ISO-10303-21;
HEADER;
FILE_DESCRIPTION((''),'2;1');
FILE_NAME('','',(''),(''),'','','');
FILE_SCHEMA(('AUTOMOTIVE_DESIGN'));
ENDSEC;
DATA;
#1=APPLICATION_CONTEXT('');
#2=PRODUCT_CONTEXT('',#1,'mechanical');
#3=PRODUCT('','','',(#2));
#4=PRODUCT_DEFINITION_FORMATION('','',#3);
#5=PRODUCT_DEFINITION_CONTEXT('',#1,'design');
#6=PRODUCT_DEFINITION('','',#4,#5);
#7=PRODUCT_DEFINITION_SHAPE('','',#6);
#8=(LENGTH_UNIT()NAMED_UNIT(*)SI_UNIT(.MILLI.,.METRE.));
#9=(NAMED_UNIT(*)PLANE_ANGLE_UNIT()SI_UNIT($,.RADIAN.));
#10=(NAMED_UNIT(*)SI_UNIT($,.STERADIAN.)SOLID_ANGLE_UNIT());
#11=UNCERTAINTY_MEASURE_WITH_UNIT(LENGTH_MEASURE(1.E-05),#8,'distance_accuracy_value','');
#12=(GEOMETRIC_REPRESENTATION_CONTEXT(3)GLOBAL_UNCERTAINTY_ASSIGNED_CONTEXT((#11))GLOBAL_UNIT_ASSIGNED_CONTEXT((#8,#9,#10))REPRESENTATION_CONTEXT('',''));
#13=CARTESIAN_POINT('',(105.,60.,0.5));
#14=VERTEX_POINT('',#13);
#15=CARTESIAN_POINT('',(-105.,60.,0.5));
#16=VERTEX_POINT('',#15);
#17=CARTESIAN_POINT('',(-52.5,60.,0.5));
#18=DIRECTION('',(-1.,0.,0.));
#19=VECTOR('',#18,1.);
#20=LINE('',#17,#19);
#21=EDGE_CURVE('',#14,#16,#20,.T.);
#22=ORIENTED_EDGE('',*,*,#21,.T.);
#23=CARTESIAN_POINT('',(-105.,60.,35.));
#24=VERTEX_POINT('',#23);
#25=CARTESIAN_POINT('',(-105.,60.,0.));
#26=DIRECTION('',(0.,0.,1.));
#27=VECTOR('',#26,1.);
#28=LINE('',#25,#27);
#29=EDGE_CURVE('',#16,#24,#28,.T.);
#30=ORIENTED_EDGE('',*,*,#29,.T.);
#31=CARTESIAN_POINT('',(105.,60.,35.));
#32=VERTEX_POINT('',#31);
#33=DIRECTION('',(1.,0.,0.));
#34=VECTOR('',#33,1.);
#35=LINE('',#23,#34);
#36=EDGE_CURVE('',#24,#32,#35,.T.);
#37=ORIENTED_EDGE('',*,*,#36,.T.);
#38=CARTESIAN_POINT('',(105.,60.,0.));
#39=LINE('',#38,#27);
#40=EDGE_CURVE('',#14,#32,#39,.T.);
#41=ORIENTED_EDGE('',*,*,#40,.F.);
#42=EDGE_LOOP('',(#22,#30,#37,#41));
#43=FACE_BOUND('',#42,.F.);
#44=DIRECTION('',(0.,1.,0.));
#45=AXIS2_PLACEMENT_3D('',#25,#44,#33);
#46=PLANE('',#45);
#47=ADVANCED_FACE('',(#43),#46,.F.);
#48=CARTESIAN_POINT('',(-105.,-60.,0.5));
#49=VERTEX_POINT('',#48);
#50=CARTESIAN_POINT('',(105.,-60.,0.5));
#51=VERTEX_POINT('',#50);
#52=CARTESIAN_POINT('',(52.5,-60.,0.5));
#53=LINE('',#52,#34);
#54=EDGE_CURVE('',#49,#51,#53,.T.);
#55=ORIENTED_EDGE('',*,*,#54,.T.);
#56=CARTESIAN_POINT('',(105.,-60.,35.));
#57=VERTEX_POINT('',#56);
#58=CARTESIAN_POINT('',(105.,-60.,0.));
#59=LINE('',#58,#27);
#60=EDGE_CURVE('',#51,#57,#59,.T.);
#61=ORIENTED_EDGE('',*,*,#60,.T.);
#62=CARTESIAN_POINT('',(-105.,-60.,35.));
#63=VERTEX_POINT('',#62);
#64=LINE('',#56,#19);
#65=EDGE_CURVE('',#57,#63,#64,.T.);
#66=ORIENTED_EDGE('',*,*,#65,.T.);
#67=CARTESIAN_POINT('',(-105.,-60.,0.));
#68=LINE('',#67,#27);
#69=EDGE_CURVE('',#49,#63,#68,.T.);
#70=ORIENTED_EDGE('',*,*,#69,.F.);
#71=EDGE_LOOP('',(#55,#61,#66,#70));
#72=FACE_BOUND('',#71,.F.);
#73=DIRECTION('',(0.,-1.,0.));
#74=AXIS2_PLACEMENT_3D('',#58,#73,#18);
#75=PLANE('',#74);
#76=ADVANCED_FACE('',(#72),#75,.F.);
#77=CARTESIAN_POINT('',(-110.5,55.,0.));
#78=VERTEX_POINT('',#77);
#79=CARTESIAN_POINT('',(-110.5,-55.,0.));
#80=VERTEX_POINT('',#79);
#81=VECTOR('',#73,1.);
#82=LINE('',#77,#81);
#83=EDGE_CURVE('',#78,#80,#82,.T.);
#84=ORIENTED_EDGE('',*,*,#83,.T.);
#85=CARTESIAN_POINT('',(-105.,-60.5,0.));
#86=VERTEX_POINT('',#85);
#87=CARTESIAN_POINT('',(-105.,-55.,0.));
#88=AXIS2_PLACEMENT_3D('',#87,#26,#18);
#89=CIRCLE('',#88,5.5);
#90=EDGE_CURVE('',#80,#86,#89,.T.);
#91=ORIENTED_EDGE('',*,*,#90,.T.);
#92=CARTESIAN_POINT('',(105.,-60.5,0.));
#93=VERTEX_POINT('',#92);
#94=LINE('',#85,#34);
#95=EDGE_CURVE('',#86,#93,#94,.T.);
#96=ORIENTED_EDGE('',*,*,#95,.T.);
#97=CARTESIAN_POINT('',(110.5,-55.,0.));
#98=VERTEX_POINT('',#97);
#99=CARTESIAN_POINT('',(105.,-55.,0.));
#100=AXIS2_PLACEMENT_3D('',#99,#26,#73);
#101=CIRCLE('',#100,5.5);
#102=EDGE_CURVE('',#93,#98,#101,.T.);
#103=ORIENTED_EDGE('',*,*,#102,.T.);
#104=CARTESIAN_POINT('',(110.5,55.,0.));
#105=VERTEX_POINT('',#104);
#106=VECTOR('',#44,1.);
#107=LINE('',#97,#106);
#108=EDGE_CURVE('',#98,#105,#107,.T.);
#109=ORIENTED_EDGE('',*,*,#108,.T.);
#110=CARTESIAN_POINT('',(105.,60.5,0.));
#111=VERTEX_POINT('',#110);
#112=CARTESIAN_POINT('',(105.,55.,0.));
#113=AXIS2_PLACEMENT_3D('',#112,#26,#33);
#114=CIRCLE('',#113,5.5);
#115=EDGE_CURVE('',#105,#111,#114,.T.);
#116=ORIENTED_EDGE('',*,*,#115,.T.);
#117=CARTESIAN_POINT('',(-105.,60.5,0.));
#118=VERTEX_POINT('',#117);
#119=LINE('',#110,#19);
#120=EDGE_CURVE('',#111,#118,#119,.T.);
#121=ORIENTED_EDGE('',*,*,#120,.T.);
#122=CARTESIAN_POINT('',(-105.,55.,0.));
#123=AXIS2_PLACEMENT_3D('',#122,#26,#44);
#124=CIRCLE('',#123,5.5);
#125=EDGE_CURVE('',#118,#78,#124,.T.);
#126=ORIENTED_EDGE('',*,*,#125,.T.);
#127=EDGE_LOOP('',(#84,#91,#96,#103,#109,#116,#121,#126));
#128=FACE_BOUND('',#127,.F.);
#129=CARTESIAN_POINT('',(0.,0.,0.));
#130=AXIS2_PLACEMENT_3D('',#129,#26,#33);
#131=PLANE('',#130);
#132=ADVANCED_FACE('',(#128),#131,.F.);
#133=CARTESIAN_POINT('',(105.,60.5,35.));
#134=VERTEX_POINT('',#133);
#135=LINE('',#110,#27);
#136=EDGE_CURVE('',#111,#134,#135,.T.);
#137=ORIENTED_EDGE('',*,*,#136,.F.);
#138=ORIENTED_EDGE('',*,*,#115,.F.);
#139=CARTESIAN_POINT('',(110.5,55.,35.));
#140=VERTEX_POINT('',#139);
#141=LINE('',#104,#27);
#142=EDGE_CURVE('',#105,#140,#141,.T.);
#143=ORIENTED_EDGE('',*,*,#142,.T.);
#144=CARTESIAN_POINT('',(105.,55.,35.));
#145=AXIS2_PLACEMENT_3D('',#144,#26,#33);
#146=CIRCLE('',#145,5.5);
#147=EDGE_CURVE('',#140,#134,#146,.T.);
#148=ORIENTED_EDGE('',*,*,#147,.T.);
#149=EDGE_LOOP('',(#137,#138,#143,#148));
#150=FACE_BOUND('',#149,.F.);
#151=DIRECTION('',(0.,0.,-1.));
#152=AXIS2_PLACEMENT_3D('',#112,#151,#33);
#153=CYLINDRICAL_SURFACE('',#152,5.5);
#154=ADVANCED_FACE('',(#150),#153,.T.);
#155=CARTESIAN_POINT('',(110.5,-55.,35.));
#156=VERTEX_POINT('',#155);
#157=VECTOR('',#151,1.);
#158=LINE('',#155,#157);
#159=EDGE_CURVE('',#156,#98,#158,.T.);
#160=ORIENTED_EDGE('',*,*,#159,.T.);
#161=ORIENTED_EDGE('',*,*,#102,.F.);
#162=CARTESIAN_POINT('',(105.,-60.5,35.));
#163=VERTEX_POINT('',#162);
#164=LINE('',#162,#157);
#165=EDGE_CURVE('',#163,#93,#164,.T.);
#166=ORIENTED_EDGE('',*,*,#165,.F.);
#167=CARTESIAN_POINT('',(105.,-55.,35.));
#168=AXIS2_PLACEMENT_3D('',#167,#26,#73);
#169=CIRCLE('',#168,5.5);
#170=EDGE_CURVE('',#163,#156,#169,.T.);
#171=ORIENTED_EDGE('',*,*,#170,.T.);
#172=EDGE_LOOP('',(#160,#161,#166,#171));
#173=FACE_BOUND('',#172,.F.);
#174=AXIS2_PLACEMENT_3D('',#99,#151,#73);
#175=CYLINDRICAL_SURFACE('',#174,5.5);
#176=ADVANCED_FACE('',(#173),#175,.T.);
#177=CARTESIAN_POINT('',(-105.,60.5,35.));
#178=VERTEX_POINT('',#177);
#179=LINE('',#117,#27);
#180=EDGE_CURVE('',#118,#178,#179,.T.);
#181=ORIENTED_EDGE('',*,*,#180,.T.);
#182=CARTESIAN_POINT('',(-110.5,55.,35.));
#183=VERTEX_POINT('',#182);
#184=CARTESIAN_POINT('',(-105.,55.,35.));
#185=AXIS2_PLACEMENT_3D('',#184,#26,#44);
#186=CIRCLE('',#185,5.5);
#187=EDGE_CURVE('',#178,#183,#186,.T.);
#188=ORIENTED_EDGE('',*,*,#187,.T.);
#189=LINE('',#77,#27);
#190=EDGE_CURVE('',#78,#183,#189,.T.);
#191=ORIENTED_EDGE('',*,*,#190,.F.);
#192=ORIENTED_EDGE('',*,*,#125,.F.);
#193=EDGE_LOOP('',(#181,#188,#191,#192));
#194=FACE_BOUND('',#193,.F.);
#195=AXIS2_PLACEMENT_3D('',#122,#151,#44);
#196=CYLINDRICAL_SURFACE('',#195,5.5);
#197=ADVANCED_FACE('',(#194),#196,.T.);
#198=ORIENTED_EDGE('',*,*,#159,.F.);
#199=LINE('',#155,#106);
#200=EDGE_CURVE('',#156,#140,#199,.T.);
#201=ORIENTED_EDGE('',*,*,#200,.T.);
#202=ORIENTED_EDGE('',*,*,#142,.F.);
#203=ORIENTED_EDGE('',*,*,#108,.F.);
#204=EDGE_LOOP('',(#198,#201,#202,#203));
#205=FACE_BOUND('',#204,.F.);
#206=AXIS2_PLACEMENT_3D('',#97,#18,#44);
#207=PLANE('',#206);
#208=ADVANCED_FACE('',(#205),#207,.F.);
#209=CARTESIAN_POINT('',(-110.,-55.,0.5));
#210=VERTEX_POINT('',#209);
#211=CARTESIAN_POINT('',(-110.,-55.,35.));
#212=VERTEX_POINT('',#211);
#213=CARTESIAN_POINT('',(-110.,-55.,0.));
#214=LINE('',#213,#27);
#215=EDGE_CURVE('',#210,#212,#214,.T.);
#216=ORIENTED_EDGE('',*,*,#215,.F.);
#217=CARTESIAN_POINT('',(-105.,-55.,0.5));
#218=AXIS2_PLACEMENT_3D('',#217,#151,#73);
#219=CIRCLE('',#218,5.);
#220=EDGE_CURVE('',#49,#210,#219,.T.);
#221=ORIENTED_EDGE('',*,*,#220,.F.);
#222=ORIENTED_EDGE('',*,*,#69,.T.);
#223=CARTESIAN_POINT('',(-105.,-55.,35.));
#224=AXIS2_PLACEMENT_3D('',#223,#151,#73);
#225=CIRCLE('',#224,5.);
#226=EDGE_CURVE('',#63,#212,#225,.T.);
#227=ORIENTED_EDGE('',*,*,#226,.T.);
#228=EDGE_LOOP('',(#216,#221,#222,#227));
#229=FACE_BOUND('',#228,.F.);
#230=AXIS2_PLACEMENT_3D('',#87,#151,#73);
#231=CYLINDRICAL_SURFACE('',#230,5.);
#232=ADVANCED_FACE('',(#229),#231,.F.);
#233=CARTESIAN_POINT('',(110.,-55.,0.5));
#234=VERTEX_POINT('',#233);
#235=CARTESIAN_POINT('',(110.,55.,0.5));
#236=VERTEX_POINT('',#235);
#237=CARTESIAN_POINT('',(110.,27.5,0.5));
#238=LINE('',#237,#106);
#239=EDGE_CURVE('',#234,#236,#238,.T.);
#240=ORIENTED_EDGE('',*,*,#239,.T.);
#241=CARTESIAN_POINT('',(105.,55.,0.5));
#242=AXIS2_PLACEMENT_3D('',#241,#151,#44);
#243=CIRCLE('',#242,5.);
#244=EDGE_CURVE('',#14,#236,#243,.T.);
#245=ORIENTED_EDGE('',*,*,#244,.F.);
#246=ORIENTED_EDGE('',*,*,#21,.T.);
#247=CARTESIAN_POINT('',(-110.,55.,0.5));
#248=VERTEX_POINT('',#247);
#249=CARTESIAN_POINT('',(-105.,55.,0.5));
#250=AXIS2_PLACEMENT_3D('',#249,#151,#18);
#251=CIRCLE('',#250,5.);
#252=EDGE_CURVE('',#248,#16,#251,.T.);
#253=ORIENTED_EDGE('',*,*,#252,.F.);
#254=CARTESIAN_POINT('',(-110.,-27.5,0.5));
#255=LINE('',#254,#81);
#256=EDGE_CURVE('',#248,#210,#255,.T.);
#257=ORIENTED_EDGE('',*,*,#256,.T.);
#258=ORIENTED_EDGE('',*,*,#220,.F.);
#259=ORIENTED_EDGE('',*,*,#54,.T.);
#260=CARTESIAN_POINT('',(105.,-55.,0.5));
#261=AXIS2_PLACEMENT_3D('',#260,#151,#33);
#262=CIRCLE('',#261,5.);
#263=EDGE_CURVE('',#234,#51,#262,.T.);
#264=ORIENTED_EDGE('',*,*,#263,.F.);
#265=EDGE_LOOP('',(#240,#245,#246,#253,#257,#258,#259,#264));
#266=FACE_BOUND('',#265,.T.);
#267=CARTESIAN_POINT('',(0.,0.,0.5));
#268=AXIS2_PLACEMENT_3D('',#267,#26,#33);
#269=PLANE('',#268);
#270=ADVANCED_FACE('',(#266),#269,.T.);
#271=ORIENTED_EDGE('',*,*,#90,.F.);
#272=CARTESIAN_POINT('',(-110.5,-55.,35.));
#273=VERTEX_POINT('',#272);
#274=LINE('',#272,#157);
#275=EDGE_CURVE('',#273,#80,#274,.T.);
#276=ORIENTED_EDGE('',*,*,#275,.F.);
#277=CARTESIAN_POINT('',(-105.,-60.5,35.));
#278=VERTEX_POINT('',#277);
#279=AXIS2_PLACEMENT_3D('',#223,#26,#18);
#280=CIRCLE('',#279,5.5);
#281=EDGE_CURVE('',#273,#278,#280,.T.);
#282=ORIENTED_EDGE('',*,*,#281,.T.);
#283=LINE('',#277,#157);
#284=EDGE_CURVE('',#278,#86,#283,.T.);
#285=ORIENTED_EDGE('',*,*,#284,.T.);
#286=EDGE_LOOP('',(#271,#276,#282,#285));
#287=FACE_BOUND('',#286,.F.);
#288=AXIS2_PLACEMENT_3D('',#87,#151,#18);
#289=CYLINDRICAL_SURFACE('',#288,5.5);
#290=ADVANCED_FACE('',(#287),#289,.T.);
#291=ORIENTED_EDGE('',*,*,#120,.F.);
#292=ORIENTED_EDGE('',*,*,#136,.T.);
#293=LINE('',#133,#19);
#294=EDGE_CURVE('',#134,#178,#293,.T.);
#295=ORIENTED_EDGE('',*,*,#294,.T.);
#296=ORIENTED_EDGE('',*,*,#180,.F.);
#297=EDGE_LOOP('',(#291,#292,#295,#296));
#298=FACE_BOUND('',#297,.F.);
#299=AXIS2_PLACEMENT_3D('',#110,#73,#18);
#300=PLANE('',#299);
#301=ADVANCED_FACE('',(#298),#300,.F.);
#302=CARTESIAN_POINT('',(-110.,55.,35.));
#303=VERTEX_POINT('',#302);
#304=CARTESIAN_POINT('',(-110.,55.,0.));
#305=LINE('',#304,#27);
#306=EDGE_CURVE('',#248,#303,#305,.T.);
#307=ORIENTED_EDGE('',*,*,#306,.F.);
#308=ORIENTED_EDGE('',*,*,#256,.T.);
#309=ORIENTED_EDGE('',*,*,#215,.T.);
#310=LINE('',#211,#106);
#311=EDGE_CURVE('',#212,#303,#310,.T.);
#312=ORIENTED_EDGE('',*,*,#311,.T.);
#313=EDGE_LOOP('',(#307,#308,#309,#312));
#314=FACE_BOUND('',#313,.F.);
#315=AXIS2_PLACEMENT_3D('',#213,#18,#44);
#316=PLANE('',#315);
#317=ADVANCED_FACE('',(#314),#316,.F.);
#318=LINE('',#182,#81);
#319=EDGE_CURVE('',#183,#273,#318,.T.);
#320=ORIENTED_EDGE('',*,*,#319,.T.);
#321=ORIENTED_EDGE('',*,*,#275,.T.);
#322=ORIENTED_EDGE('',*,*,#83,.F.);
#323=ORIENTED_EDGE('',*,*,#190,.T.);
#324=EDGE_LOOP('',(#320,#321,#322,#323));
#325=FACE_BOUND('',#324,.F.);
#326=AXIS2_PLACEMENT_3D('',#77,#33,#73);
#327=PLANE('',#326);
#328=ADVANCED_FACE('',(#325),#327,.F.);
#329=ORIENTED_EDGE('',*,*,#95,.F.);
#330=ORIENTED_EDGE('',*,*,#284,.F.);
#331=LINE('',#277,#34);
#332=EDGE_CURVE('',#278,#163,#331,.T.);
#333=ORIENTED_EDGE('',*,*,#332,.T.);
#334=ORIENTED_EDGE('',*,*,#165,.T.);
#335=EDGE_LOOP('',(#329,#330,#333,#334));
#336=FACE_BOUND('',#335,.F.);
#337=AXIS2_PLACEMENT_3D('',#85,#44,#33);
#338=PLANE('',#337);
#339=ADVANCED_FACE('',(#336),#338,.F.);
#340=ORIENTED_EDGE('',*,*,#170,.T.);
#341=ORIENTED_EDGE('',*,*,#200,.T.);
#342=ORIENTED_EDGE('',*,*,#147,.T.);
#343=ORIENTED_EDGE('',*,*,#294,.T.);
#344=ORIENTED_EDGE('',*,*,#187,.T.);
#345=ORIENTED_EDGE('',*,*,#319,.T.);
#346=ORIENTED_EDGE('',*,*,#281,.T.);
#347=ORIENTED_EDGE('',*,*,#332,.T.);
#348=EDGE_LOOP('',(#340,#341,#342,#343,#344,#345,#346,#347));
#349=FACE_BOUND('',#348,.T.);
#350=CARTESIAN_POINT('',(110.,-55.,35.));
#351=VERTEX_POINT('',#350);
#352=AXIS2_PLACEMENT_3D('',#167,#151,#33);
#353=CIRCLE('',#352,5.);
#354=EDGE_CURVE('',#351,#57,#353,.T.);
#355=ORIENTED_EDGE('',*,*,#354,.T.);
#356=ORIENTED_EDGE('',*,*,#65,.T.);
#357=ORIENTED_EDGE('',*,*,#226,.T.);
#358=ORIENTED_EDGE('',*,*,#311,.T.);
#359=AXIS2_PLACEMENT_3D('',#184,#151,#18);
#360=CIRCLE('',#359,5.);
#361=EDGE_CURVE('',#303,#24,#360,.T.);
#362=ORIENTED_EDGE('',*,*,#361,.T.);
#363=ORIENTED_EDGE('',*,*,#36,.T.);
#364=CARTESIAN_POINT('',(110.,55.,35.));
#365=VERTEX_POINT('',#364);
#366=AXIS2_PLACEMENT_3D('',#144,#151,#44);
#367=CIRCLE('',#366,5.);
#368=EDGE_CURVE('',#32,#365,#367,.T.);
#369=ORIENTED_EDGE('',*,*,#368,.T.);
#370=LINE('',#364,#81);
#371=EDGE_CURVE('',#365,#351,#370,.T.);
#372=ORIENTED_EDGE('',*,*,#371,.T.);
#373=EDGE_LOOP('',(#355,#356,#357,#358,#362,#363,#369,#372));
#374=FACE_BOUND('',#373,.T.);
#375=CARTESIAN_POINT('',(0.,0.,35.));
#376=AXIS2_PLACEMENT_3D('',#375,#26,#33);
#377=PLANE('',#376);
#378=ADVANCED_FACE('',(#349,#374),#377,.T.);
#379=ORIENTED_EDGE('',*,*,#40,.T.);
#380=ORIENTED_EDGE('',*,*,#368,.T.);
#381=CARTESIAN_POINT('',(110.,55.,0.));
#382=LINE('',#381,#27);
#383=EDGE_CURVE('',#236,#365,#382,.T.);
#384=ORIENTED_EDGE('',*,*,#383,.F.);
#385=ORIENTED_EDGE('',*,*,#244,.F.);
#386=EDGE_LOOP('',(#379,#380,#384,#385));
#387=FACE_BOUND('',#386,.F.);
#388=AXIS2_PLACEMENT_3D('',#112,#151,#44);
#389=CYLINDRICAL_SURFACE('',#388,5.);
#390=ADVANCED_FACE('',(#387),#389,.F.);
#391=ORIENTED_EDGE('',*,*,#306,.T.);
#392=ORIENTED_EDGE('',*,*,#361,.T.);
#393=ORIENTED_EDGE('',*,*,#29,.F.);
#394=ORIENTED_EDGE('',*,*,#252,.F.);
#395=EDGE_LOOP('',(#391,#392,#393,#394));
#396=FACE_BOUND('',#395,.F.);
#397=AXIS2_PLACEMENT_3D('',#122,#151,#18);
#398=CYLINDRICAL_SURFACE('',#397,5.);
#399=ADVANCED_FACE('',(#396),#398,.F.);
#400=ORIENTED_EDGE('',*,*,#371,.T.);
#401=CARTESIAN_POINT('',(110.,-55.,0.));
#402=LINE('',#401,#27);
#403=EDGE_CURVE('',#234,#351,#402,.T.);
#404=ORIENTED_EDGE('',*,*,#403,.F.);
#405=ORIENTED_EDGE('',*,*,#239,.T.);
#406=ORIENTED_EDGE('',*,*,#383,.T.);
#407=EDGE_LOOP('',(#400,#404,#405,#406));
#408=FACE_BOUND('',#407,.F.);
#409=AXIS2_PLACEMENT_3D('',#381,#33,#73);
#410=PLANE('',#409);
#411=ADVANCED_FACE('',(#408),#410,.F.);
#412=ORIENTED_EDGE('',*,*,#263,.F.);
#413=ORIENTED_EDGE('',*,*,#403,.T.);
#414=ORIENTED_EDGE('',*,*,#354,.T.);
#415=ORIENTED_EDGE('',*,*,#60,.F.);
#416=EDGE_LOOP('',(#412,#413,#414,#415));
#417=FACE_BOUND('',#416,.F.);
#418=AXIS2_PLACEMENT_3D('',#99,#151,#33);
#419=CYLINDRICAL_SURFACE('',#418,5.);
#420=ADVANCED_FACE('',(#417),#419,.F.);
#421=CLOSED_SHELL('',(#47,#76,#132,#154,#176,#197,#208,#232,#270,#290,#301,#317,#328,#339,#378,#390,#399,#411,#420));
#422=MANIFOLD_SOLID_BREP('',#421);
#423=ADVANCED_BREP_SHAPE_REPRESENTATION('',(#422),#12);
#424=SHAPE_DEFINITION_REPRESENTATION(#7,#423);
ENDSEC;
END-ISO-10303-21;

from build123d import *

# Parameters (mm, degrees)
F1_DEPTH = 0.5
F2_DEPTH = 35


with BuildPart() as f1:
    # F0 (on Top) → F1 (new body)
    with BuildSketch(Plane.XY):
        with BuildLine():
            Line((110.5, -55), (110.5, 55))
            ThreePointArc((110.5, 55), (108.8890872965, 58.8890872965), (105, 60.5))
            Line((105, 60.5), (-105, 60.5))
            ThreePointArc((-105, 60.5), (-108.8890872965, 58.8890872965), (-110.5, 55))
            Line((-110.5, 55), (-110.5, -55))
            ThreePointArc((-110.5, -55), (-108.8890872965, -58.8890872965), (-105, -60.5))
            Line((-105, -60.5), (105, -60.5))
            ThreePointArc((105, -60.5), (108.8890872965, -58.8890872965), (110.5, -55))
        make_face()
        with BuildLine():
            ThreePointArc((110, -55), (108.5355339059, -58.5355339059), (105, -60))
            Line((105, -60), (-105, -60))
            ThreePointArc((-105, -60), (-108.5355339059, -58.5355339059), (-110, -55))
            Line((-110, -55), (-110, 55))
            ThreePointArc((-110, 55), (-108.5355339059, 58.5355339059), (-105, 60))
            Line((-105, 60), (105, 60))
            ThreePointArc((105, 60), (108.5355339059, 58.5355339059), (110, 55))
            Line((110, 55), (110, -55))
        make_face(mode=Mode.SUBTRACT)
        with BuildLine():
            Line((-105, -60), (105, -60))
            ThreePointArc((105, -60), (108.5355339059, -58.5355339059), (110, -55))
            Line((110, -55), (110, 55))
            ThreePointArc((110, 55), (108.5355339059, 58.5355339059), (105, 60))
            Line((105, 60), (-105, 60))
            ThreePointArc((-105, 60), (-108.5355339059, 58.5355339059), (-110, 55))
            Line((-110, 55), (-110, -55))
            ThreePointArc((-110, -55), (-108.5355339059, -58.5355339059), (-105, -60))
        make_face()
    extrude(amount=F1_DEPTH)

    # F0 (on Top) → F2 (join)
    with BuildSketch(Plane.XY):
        with BuildLine():
            Line((110.5, -55), (110.5, 55))
            ThreePointArc((110.5, 55), (108.8890872965, 58.8890872965), (105, 60.5))
            Line((105, 60.5), (-105, 60.5))
            ThreePointArc((-105, 60.5), (-108.8890872965, 58.8890872965), (-110.5, 55))
            Line((-110.5, 55), (-110.5, -55))
            ThreePointArc((-110.5, -55), (-108.8890872965, -58.8890872965), (-105, -60.5))
            Line((-105, -60.5), (105, -60.5))
            ThreePointArc((105, -60.5), (108.8890872965, -58.8890872965), (110.5, -55))
        make_face()
        with BuildLine():
            ThreePointArc((110, -55), (108.5355339059, -58.5355339059), (105, -60))
            Line((105, -60), (-105, -60))
            ThreePointArc((-105, -60), (-108.5355339059, -58.5355339059), (-110, -55))
            Line((-110, -55), (-110, 55))
            ThreePointArc((-110, 55), (-108.5355339059, 58.5355339059), (-105, 60))
            Line((-105, 60), (105, 60))
            ThreePointArc((105, 60), (108.5355339059, 58.5355339059), (110, 55))
            Line((110, 55), (110, -55))
        make_face(mode=Mode.SUBTRACT)
    extrude(amount=F2_DEPTH)


solid = f1.part
